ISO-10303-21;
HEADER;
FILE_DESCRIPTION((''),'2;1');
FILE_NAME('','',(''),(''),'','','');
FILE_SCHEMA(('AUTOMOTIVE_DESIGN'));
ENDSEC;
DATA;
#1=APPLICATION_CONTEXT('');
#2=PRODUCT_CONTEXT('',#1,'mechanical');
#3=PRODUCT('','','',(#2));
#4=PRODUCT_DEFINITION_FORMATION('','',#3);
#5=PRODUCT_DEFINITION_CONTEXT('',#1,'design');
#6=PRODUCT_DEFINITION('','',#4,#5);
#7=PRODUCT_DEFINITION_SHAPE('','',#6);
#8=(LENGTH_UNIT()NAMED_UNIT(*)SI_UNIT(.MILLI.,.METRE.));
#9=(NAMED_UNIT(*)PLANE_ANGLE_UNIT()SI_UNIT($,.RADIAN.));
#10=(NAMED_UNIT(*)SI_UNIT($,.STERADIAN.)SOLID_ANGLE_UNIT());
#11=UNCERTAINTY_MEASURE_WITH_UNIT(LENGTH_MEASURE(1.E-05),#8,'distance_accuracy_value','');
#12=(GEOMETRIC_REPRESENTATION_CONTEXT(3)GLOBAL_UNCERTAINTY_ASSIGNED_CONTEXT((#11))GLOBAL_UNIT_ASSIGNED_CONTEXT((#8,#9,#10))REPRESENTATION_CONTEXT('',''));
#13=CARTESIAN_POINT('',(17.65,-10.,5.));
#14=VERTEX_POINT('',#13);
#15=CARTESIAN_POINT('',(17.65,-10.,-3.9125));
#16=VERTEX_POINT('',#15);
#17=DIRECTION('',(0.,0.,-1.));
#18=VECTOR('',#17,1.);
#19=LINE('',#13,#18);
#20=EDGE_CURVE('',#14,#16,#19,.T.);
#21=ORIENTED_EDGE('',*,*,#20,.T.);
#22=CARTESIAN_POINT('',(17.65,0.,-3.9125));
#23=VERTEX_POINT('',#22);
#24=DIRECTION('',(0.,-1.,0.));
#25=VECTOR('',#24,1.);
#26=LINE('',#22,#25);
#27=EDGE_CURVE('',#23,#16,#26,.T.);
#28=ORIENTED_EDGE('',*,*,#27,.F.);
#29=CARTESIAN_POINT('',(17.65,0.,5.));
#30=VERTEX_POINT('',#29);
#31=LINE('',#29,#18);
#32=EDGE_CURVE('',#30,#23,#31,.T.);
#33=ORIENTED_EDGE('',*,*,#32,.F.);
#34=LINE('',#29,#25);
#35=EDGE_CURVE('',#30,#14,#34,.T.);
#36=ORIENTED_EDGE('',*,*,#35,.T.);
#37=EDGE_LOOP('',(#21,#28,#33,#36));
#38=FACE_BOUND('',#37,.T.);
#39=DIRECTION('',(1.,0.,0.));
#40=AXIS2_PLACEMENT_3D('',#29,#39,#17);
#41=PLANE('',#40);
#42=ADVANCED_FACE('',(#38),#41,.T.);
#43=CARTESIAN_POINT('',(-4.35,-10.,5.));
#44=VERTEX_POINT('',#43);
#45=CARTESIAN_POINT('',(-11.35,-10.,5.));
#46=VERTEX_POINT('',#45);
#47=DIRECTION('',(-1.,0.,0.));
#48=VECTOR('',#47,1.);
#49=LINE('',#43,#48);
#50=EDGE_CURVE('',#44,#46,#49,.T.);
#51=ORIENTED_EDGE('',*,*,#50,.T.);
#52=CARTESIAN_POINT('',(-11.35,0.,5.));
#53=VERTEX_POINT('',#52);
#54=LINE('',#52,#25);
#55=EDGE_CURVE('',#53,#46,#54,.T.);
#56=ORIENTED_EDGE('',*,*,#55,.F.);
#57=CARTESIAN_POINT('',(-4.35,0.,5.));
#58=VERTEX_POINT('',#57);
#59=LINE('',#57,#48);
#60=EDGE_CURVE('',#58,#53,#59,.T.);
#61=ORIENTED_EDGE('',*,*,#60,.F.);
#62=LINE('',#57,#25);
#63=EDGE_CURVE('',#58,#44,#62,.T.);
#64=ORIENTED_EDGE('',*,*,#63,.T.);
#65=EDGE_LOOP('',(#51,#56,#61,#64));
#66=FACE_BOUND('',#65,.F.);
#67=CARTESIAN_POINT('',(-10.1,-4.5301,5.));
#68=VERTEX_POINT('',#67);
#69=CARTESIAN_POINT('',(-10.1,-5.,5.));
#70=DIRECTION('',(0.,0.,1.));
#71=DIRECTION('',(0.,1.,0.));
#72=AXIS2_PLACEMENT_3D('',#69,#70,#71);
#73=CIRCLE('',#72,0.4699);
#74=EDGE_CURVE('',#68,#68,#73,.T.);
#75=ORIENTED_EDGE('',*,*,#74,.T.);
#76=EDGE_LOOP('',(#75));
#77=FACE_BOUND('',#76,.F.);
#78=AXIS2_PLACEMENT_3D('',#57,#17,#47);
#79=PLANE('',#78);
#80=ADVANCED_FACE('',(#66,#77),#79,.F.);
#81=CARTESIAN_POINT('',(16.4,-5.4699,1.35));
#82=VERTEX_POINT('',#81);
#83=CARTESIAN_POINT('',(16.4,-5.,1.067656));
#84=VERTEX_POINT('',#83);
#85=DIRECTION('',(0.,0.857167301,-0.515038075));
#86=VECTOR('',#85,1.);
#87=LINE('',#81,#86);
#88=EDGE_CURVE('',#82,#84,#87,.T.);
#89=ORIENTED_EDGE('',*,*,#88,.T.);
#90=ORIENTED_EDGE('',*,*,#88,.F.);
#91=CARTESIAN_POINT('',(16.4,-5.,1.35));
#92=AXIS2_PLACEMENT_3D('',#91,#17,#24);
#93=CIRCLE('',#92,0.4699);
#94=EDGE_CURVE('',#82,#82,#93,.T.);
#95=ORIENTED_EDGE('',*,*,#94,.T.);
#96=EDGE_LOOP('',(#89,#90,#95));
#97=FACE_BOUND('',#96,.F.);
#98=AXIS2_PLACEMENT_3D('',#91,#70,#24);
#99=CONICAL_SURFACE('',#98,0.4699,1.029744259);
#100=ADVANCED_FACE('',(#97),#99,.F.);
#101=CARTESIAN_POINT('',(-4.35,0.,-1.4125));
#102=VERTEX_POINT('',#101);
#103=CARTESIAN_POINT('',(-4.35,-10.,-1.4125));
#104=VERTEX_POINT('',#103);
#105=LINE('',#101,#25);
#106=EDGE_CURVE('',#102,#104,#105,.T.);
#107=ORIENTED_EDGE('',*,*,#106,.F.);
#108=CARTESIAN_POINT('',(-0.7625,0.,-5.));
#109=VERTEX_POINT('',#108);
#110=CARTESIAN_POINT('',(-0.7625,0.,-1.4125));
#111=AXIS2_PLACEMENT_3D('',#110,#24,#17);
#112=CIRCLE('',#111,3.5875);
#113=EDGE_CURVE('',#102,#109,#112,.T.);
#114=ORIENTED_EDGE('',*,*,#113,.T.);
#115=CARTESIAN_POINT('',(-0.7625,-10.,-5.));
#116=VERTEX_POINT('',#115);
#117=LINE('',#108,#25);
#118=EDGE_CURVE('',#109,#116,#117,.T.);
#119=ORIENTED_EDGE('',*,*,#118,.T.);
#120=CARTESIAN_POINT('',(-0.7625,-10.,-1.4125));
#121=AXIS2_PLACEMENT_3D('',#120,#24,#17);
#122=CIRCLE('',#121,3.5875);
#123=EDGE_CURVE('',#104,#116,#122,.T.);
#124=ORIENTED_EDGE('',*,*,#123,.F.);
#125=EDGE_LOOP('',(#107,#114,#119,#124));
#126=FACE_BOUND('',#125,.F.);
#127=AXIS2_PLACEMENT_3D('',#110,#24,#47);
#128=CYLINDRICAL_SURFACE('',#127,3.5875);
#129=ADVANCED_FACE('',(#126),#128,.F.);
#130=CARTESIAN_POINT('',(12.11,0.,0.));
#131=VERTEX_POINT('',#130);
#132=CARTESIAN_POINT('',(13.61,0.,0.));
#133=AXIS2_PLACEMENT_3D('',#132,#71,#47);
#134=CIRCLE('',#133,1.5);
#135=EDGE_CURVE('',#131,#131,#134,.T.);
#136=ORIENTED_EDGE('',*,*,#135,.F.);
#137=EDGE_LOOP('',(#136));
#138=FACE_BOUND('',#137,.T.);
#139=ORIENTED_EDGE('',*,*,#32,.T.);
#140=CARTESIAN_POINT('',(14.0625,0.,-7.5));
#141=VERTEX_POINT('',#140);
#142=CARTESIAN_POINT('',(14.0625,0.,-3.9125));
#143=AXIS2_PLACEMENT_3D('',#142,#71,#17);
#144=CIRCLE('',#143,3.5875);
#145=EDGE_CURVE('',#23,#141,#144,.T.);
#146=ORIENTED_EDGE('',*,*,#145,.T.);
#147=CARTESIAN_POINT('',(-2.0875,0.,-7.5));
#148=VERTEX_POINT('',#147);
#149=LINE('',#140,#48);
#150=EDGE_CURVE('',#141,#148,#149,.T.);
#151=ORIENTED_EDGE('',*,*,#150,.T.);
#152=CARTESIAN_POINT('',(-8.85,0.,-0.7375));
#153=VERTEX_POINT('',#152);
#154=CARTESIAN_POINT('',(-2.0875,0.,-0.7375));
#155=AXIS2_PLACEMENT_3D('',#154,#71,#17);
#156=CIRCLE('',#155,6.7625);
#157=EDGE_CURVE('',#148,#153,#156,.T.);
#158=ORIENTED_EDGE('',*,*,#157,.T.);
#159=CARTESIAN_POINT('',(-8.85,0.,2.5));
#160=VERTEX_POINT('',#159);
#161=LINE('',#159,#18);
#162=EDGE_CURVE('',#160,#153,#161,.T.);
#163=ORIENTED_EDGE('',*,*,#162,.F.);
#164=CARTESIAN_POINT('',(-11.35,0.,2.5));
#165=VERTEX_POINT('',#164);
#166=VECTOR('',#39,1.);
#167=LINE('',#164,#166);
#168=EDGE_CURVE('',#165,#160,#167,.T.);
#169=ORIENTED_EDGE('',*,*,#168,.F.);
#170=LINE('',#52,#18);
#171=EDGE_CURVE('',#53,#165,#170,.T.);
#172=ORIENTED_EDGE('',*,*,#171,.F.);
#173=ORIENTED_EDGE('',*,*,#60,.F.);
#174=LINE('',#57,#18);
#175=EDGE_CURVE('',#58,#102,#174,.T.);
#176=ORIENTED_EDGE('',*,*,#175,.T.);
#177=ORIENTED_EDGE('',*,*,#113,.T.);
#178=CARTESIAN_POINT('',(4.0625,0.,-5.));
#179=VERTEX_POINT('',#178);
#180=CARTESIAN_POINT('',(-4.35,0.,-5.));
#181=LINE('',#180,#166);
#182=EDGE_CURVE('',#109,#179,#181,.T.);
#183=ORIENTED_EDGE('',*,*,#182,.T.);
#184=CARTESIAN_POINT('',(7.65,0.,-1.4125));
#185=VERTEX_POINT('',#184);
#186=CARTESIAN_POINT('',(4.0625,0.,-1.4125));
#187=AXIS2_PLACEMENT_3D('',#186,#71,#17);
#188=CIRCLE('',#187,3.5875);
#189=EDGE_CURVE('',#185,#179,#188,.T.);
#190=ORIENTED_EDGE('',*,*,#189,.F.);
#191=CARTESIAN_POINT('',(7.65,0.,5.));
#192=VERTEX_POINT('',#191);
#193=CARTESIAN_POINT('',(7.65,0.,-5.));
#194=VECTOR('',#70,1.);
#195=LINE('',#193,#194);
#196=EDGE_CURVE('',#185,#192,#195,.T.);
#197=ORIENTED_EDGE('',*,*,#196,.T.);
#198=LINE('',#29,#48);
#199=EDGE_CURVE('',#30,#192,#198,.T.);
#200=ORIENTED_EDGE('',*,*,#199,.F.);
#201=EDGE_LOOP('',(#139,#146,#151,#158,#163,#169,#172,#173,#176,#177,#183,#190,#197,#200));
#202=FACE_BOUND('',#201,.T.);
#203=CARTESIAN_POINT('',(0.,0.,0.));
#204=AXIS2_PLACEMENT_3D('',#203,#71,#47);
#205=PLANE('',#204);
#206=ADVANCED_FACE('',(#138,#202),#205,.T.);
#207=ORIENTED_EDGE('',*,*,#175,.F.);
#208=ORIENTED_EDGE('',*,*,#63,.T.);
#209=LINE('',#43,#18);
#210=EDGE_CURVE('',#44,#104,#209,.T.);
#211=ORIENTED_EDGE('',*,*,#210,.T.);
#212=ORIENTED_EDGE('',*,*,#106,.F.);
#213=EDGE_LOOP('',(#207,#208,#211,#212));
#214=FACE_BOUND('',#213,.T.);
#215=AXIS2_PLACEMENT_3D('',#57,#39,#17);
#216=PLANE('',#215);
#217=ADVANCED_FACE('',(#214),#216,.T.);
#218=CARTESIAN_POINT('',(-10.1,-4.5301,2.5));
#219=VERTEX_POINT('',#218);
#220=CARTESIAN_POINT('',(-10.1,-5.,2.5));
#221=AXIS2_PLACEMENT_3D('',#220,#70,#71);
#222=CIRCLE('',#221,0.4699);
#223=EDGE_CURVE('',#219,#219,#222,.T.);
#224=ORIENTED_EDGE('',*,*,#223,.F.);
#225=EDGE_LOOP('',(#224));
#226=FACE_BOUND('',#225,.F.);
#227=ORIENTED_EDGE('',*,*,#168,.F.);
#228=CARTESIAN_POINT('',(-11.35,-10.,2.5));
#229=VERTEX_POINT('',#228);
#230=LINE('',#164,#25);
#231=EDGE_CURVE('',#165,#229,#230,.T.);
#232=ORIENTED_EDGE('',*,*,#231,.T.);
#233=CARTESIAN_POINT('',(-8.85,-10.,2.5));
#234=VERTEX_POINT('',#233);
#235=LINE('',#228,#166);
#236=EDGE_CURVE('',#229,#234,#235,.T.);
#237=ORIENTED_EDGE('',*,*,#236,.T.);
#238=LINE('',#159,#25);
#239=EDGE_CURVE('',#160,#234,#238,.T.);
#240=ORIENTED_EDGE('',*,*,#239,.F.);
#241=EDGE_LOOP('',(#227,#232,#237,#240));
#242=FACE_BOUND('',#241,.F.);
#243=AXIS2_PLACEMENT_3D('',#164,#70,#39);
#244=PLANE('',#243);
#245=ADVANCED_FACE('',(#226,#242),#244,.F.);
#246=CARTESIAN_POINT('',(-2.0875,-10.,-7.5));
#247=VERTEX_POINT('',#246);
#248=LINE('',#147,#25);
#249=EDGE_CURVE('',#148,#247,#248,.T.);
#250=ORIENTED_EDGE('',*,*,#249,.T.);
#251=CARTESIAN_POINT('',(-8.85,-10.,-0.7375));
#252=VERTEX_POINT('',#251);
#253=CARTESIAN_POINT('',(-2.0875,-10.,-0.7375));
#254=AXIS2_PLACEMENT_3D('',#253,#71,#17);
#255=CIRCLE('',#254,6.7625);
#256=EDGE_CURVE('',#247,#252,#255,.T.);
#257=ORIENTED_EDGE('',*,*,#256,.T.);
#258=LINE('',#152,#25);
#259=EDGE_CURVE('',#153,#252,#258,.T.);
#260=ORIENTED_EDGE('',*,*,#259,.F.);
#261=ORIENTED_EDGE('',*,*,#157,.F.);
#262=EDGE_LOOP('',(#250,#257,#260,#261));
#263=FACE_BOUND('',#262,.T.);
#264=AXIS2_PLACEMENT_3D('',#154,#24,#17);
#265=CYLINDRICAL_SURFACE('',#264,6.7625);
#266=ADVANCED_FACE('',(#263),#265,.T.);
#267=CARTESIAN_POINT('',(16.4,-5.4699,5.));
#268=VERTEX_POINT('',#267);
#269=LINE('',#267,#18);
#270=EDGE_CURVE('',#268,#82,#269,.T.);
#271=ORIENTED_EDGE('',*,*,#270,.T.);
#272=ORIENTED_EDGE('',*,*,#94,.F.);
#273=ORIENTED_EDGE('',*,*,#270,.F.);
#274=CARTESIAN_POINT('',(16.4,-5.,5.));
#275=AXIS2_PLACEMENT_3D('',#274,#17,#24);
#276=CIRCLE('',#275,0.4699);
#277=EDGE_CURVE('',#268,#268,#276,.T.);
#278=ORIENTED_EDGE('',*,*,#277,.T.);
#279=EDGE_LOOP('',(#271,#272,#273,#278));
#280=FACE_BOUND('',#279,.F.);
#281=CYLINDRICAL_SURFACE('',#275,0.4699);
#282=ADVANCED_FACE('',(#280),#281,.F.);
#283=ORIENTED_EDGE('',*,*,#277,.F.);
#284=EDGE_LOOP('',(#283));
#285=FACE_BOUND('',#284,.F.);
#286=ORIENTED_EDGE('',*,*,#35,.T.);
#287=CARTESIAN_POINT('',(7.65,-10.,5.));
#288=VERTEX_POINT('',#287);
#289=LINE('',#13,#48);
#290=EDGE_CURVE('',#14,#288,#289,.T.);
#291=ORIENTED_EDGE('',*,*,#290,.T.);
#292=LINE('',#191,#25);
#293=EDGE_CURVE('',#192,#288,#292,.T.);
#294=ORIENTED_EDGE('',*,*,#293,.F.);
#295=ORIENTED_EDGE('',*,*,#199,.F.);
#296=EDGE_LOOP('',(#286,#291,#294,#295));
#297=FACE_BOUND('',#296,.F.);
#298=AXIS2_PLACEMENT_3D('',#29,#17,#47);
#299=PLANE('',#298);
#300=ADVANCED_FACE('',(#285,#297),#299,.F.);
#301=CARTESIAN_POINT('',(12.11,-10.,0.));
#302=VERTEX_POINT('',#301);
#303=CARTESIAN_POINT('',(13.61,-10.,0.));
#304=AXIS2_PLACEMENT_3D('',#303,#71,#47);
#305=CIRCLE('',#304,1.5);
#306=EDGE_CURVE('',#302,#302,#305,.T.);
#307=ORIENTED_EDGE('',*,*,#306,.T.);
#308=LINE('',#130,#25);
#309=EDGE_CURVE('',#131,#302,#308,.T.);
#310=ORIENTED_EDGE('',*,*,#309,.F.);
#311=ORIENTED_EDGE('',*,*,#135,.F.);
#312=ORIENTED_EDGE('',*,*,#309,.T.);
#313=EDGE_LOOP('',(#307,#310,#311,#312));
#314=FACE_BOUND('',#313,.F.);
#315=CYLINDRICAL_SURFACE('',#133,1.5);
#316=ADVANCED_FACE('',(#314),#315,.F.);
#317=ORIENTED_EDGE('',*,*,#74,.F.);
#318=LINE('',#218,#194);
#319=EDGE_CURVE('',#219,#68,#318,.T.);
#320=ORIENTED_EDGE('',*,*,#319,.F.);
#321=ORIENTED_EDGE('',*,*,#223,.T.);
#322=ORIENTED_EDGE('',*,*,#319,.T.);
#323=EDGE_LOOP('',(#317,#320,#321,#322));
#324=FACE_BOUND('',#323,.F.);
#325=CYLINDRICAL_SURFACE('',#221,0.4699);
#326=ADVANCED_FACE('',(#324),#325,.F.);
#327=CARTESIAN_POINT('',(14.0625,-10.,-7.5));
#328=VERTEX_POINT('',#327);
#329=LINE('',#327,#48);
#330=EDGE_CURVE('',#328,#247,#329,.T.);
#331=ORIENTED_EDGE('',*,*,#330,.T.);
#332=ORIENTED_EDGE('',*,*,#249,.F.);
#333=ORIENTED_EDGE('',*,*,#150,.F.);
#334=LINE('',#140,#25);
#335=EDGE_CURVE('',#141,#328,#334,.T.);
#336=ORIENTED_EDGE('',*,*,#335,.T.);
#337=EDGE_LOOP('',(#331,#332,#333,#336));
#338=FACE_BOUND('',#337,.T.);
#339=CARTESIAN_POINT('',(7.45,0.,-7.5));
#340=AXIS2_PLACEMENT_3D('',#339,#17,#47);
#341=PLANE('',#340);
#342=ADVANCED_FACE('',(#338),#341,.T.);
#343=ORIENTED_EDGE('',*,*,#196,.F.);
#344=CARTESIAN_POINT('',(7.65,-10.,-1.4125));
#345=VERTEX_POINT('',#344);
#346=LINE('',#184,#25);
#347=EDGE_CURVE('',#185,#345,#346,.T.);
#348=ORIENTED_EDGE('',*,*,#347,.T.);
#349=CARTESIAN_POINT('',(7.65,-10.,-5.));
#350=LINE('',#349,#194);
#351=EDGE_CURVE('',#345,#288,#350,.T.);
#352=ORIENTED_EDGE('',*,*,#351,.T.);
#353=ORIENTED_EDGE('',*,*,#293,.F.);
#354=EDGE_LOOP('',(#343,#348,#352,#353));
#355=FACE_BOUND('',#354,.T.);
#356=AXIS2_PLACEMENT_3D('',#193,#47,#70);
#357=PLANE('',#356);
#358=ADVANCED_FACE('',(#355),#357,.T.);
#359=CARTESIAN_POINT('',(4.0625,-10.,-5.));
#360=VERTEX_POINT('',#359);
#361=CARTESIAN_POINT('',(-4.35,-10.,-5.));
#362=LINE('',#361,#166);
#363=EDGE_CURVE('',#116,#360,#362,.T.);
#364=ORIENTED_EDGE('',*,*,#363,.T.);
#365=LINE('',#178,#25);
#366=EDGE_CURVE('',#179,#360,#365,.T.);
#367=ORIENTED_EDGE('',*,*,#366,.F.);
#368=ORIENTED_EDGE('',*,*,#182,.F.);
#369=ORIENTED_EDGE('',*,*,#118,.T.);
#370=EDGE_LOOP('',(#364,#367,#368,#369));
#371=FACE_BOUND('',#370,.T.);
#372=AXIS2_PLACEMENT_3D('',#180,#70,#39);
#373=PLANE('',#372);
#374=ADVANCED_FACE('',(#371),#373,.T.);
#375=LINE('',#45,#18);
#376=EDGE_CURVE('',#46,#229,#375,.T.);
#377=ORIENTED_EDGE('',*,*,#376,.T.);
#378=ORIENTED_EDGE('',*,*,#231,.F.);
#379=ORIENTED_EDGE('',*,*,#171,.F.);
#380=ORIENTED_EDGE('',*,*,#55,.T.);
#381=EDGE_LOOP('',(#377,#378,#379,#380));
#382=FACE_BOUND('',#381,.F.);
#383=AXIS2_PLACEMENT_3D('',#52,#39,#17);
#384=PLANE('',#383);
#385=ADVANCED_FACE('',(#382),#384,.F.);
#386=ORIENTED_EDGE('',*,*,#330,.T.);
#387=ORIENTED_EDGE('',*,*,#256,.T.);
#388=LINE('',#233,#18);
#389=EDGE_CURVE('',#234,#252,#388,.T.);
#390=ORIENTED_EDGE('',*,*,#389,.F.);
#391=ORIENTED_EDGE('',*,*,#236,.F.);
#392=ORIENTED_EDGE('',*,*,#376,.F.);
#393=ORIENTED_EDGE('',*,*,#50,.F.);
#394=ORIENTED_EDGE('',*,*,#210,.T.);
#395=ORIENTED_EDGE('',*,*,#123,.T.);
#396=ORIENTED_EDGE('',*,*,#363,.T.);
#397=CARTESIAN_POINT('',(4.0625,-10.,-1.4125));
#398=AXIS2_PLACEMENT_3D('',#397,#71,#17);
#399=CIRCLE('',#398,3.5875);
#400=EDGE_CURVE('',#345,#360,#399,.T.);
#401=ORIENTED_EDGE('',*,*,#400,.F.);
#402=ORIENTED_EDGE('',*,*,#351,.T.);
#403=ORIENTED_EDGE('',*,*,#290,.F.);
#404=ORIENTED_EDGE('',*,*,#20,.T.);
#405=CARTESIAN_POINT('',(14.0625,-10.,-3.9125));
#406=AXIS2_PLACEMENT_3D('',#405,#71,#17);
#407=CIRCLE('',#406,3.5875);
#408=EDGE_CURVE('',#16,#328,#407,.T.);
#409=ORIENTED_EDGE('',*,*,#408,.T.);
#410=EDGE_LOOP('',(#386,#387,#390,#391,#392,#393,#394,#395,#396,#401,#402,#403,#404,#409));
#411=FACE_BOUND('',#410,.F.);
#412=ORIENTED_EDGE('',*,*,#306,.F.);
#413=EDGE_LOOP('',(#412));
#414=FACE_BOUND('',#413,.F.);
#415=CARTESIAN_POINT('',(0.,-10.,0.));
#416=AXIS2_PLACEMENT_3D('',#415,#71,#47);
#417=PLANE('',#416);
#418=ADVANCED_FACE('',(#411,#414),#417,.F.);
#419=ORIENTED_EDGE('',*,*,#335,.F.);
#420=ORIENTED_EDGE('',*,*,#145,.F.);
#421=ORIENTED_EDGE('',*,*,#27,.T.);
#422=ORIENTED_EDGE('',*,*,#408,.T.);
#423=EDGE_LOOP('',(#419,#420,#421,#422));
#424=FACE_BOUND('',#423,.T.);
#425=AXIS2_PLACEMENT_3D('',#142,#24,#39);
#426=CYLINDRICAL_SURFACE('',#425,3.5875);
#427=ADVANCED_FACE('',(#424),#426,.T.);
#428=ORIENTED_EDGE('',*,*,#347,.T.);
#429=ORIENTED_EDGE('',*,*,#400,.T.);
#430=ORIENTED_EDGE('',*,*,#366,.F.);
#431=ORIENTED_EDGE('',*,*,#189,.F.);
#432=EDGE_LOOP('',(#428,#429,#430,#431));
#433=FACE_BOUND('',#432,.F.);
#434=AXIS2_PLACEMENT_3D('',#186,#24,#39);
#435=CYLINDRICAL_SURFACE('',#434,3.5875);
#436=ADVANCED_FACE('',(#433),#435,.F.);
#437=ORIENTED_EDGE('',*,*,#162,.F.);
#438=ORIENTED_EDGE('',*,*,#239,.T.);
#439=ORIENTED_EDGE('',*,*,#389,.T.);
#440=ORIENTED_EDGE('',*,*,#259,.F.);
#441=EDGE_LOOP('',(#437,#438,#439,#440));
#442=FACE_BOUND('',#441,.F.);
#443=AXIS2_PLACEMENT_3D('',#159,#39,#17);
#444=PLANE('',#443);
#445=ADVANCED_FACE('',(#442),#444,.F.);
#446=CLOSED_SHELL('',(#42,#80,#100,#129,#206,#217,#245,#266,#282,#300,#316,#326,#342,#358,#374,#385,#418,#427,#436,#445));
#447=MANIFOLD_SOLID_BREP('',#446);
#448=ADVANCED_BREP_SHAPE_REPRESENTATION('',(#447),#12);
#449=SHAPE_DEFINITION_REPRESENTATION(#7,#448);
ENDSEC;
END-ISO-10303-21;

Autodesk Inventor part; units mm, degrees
ref_plane "YZ Plane" through (0, 0, 0) normal (1, 0, 0) x (0, 1, 0)
ref_plane "XZ Plane" through (0, 0, 0) normal (0, 1, 0) x (-1, 0, 0)
ref_plane "XY Plane" through (0, 0, 0) normal (0, 0, 1) x (1, 0, 0)
sketch "Sketch1" plane through (0, 0, 0) normal (0, 1, 0) x (-1, 0, 0)
  line L0 (4.35, -5) -> (-7.65, -5)
  line L1 (-7.65, -5) -> (-7.65, 5)
  line L2 (-7.65, 5) -> (4.35, 5)
  line L3 (4.35, 5) -> (4.35, -5)
  line L4 (4.35, -5) -> (-7.65, 5) construction
  line L5 (-7.65, -5) -> (4.35, 5) construction
  line L6 (4.35, 5) -> (11.35, 5)
  line L7 (11.35, 5) -> (11.35, 2.5)
  line L8 (11.35, 2.5) -> (8.85, 2.5)
  line L9 (8.85, 2.5) -> (8.85, -7.5)
  line L10 (-7.45, -7.5) -> (8.85, -7.5)
  line L11 (-7.65, 5) -> (-7.45, 5)
  line L12 (-17.65, 5) -> (-17.65, -7.5)
  line L13 (-17.65, -7.5) -> (-7.45, -7.5)
  line L14 (-17.65, 5) -> (-7.45, 5)
  circle A0 centre (-13.61, 0) radius 1.5
  dimension "d29" = 10
  dimension "d30" = 7
  dimension "d31" = 2.5
  dimension "d32" = 2.5
  dimension "d33" = 10
  dimension "d34" = 90
  dimension "d40" = 12
  dimension "d70" = 3
extrude "Extrusion9" add sketch "Sketch1" against normal blind 10 contours L3 L6 L7 L8 L9 L10 L13 L12 L14 L1 L0
fillet "Fillet7" radius 3.5875 2 edges at (-4.35, -5, -5) (7.65, -5, -5)
fillet "Fillet9" radius 3.5875 1 edges at (17.65, -5, -7.5)
fillet "Fillet10" radius 6.7625 1 edges at (-8.85, -5, -7.5)
sketch "Sketch5" plane through (-11.35, -10, 2.5) normal (0, 0, -1) x (-1, 0, 0)
  line L0 (-0.5, 0) -> (-0.5, 10) projected
  point P0 (-11.35, 10)
  point P1 (-0.5, 5)
sketch "Sketch6" plane through (-8.85, 0, 2.5) normal (0, 0, -1) x (-1, 0, 0)
  line L0 (2.5, -10) -> (0, -10) projected
  point P0 (-8.85, 0)
  point P1 (1.25, -5)
hole "Hole1" at (-10.1, -5, 2.5) direction (0, 0, 1) diameter 0.9398 depth 3.65 tip angle 118 thread size "120-102 UNM" class "2B" standard "ANSI Unified Screw Threads"
sketch "Sketch7" plane through (7.65, 0, 5) normal (0, 0, 1) x (1, 0, 0)
  point P0 (-7.65, 0)
  point P1 (8.75, -5)
hole "Hole2" at (16.4, -5, 5) direction (0, 0, -1) diameter 0.9398 depth 3.65 tip angle 118 thread size "120-102 UNM" class "2B" standard "ANSI Unified Screw Threads"
properties part number "chassis3"
